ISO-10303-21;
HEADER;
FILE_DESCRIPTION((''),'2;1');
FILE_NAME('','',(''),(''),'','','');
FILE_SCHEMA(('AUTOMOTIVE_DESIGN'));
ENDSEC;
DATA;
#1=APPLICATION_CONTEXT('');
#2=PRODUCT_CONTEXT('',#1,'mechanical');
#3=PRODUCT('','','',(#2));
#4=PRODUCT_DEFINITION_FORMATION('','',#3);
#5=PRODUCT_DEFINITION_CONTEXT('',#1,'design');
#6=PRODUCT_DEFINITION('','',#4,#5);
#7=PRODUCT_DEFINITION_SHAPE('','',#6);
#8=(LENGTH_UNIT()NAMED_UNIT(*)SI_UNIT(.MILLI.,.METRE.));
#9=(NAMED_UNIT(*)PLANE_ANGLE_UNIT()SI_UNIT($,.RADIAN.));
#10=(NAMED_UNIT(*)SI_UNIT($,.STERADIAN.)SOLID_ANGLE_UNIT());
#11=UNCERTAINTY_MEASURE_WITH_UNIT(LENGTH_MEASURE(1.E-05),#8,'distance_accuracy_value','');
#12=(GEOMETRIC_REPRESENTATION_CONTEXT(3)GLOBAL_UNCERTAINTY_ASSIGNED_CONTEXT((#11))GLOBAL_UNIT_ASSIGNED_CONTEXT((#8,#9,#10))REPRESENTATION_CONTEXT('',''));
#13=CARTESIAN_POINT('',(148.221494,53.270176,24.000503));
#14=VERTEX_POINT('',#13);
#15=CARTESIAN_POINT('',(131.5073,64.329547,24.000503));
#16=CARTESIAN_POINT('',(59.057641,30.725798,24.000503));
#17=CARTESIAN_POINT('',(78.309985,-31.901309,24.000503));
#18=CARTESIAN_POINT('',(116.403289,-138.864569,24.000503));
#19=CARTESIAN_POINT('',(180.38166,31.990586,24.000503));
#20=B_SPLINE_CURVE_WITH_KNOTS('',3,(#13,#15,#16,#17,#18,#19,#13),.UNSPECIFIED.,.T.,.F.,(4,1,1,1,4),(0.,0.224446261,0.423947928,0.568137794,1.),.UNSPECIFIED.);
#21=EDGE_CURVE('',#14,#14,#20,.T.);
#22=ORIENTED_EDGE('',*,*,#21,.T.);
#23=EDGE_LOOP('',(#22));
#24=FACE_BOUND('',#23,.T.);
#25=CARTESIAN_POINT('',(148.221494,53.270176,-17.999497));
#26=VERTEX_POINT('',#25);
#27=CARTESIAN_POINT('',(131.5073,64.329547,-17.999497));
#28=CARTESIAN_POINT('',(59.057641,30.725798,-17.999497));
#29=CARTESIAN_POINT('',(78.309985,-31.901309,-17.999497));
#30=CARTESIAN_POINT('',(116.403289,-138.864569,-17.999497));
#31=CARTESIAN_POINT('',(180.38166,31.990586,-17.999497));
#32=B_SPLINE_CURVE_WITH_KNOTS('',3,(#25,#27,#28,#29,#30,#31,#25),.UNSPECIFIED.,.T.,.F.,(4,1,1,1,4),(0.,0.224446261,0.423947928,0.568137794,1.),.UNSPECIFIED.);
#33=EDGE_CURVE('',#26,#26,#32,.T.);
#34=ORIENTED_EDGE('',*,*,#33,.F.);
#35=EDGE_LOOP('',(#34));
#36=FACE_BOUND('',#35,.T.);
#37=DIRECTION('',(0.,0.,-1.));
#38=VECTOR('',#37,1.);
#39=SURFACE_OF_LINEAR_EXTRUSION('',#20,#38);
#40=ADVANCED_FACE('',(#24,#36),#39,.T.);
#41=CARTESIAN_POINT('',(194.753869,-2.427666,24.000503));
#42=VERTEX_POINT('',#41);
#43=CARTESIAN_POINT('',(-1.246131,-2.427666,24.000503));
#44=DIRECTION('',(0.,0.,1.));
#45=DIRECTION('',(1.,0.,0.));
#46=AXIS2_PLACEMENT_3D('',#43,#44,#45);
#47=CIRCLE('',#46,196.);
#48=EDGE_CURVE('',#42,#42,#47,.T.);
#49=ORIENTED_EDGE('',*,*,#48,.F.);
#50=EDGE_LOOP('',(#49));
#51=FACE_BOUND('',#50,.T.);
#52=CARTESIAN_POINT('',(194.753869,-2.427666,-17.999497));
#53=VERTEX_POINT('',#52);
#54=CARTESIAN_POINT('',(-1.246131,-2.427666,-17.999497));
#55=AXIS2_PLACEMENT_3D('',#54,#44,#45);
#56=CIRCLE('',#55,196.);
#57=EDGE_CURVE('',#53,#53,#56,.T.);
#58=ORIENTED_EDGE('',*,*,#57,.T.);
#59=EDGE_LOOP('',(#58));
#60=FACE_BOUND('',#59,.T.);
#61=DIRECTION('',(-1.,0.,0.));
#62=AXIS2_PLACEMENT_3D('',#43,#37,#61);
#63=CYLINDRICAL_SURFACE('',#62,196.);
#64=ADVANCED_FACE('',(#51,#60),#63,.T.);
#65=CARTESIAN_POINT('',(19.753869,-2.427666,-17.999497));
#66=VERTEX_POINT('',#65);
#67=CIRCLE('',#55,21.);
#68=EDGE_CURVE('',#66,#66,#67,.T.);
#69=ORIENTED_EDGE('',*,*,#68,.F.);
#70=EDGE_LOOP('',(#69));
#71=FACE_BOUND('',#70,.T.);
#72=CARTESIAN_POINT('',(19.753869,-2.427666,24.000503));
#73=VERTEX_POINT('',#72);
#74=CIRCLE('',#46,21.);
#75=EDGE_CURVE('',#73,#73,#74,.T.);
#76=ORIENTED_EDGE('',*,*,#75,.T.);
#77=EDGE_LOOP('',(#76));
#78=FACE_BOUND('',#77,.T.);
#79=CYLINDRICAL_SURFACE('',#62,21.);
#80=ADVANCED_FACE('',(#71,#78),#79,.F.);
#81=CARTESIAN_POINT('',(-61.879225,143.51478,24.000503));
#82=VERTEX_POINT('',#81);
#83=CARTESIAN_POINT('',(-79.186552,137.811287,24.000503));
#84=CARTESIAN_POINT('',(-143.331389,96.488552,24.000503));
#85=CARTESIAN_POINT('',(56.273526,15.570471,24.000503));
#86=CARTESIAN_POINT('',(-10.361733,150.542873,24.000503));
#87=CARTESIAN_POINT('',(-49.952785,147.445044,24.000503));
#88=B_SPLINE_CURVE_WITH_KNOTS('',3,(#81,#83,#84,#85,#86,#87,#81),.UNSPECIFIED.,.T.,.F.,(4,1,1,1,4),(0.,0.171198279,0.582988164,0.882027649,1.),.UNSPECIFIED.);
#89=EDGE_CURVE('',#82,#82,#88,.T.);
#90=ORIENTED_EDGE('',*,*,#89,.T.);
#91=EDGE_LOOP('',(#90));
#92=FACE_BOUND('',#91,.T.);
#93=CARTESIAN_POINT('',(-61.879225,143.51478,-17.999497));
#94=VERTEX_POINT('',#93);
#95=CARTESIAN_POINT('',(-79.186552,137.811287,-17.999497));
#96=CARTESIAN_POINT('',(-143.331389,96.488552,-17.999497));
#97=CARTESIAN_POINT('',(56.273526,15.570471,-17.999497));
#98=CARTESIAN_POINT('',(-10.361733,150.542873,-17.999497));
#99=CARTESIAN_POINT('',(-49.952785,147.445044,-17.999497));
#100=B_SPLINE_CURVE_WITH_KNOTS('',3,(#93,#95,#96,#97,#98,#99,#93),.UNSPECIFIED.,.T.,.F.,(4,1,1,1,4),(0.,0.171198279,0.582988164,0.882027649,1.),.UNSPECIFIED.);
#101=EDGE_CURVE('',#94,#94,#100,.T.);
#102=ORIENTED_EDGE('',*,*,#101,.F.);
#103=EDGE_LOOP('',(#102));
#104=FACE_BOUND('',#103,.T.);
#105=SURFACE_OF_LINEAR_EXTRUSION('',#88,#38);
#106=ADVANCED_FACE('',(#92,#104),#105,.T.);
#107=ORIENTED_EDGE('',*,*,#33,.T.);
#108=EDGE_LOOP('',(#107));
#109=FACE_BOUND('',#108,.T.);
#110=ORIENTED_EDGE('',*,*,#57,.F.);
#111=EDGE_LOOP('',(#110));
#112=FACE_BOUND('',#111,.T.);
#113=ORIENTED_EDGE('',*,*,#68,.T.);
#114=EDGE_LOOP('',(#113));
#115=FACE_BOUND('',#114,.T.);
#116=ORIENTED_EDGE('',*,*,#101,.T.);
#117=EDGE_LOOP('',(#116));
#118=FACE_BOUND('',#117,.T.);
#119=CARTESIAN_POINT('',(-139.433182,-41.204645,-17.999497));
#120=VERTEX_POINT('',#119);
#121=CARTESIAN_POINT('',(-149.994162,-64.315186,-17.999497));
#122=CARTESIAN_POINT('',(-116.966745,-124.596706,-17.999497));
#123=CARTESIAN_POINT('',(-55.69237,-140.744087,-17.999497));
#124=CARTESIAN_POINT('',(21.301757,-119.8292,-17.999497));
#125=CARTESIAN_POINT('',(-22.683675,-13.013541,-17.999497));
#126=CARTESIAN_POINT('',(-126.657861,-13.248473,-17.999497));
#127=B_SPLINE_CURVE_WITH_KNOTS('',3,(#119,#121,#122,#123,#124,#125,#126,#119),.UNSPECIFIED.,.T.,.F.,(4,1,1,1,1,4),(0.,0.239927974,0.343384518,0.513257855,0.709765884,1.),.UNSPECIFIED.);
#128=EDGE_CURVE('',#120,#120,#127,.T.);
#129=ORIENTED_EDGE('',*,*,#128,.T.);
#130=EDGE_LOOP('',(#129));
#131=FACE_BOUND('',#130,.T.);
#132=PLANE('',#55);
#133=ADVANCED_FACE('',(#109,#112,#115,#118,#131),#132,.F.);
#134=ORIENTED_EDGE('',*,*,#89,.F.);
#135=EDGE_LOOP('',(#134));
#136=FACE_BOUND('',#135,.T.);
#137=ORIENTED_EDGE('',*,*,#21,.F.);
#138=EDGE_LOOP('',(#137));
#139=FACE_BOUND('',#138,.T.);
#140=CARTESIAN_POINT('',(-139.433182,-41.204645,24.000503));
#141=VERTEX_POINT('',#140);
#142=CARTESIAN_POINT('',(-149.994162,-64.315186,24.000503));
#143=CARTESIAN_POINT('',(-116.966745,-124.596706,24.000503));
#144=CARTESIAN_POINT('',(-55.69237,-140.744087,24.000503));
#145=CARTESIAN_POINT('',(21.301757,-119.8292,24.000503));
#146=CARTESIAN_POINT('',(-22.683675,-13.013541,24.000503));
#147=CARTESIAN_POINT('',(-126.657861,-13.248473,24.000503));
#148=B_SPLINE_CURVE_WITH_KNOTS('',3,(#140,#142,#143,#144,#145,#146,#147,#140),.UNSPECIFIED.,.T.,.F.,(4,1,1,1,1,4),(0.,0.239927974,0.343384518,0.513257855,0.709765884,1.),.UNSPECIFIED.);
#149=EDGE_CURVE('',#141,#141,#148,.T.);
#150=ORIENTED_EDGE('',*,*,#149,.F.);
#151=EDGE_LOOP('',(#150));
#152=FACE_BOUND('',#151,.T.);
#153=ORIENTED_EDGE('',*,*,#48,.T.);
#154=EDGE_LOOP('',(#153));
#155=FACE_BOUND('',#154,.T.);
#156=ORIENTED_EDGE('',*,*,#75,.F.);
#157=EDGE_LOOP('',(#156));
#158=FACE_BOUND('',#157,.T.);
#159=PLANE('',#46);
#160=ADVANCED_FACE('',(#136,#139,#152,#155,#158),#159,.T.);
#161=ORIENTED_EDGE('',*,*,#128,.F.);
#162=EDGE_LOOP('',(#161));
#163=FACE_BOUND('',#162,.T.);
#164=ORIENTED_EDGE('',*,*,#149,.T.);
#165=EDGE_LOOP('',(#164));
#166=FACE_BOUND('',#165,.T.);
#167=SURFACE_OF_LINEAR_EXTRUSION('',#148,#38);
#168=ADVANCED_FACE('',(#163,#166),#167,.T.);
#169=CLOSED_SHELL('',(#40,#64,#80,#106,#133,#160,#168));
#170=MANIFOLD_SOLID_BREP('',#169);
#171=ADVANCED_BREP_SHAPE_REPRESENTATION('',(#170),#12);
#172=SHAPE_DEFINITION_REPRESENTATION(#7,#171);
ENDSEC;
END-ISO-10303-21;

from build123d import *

# Parameters (mm, degrees)
CROQUIS4_R              = 28
CROQUIS4_R_2            = 3
SALIENTE_EXTRUIR4_DEPTH = 6
ESCALA1_OUTLINE_R       = 3
ESCALA1_DEPTH           = 6
ESCALA1_START           = -17.999496841
ESCALA1_2_OUTLINE_R     = 196
ESCALA1_2_OUTLINE_R_2   = 21
ESCALA1_2_DEPTH         = 42


# Read off the part's stored shape, not the designer's step: Escala1
with BuildPart() as part:
    # Croquis4 → Saliente-Extruir4 (new body)
    with BuildSketch(Plane.XY):
        Circle(CROQUIS4_R)
        Circle(CROQUIS4_R_2, mode=Mode.SUBTRACT)
        with BuildLine():
            add(Edge.make_bspline(
                [(-8.661870504, 20.848920863), (-11.134345794, 20.034136118), (-20.297893872, 14.130888348), (8.217093964, 2.571162502), (-1.30222885, 21.85293415), (-6.958093307, 21.41038721), (-8.661870504, 20.848920863)],
                knots=[0, 0, 0, 0, 0.171198279, 0.582988164, 0.882027649, 1, 1, 1, 1], degree=3))
        make_face(mode=Mode.SUBTRACT)
        with BuildLine():
            add(Edge.make_bspline(
                [(-19.741007194, -5.539568345), (-21.249718651, -8.841074311), (-16.531516182, -17.452719956), (-7.778034095, -19.759488675), (3.221126904, -16.771647645), (-3.062506153, -1.512267892), (-17.915961418, -1.545829524), (-19.741007194, -5.539568345)],
                knots=[0, 0, 0, 0, 0.239927974, 0.343384518, 0.513257855, 0.709765884, 1, 1, 1, 1], degree=3))
        make_face(mode=Mode.SUBTRACT)
        with BuildLine():
            add(Edge.make_bspline(
                [(21.352517986, 7.956834532), (18.964775909, 9.536744657), (8.614824702, 4.736209176), (11.365159497, -4.210520436), (16.807060129, -19.490986174), (25.946827357, 4.916893174), (21.352517986, 7.956834532)],
                knots=[0, 0, 0, 0, 0.224446261, 0.423947928, 0.568137794, 1, 1, 1, 1], degree=3))
        make_face(mode=Mode.SUBTRACT)
    extrude(amount=SALIENTE_EXTRUIR4_DEPTH)

    # Escala1 outline → Escala1 (cut)
    with BuildSketch(Plane.XY):
        with BuildLine():
            add(Edge.make_bspline(
                [(17.000522152, 7.967507439), (14.840589963, 7.215803291), (9.089500341, 3.192108217), (11.365159497, -4.210520436), (14.550664807, -13.155190328), (17.331175474, -11.190725846), (18.484727449, -9.617464952)],
                knots=[0.098053943, 0.098053943, 0.098053943, 0.098053943, 0.224446261, 0.423947928, 0.568137794, 0.678429294, 0.678429294, 0.678429294, 0.678429294], degree=3))
            ThreePointArc((17.000522152, 7.967507439), (9.434064569, 15.653634005), (-0.949635508, 18.57024071))
            add(Edge.make_bspline(
                [(-13.643682988, 14.522281267), (-11.296449172, 10.565883797), (5.297482073, 4.692739999), (1.478494793, 15.764375539), (-0.949635508, 18.57024071)],
                knots=[0.227878432, 0.227878432, 0.227878432, 0.227878432, 0.582988164, 0.803352892, 0.803352892, 0.803352892, 0.803352892], degree=3))
            ThreePointArc((-13.643682988, 14.522281267), (-13.860654258, -19.216764164), (18.484727449, -9.617464952))
        make_face()
        with BuildLine():
            add(Edge.make_bspline(
                [(-19.741007194, -5.539568345), (-21.249718651, -8.841074311), (-16.531516182, -17.452719956), (-7.778034095, -19.759488675), (3.221126904, -16.771647645), (-3.062506153, -1.512267892), (-17.915961418, -1.545829524), (-19.741007194, -5.539568345)],
                knots=[0, 0, 0, 0, 0.239927974, 0.343384518, 0.513257855, 0.709765884, 1, 1, 1, 1], degree=3))
        make_face(mode=Mode.SUBTRACT)
        Circle(ESCALA1_OUTLINE_R, mode=Mode.SUBTRACT)
    extrude(amount=ESCALA1_DEPTH, mode=Mode.SUBTRACT)

    # Escala1 2 outline → Escala1 2 (add)
    with BuildSketch(Plane.XY.offset(ESCALA1_START)):
        with Locations((-1.246131437, -2.427666094)):
            Circle(ESCALA1_2_OUTLINE_R)
        with BuildLine():
            add(Edge.make_bspline(
                [(-139.433181797, -41.204644512), (-149.994161996, -64.315186271), (-116.966744714, -124.596705788), (-55.692370104, -140.74408682), (21.301756893, -119.829199607), (-22.683674511, -13.013541342), (-126.657861367, -13.248472762), (-139.433181797, -41.204644512)],
                knots=[0, 0, 0, 0, 0.239927974, 0.343384518, 0.513257855, 0.709765884, 1, 1, 1, 1], degree=3))
        make_face(mode=Mode.SUBTRACT)
        with BuildLine():
            add(Edge.make_bspline(
                [(148.221494462, 53.270175632), (131.507299926, 64.329546503), (59.057641477, 30.725798138), (78.309985044, -31.901309148), (116.403289469, -138.864569314), (180.381660063, 31.990586127), (148.221494462, 53.270175632)],
                knots=[0, 0, 0, 0, 0.224446261, 0.423947928, 0.568137794, 1, 1, 1, 1], degree=3))
        make_face(mode=Mode.SUBTRACT)
        with BuildLine():
            add(Edge.make_bspline(
                [(-61.879224962, 143.514779949), (-79.186551993, 137.811286735), (-143.331388538, 96.488552344), (56.273526308, 15.570471419), (-10.361733388, 150.542872956), (-49.95278459, 147.445044375), (-61.879224962, 143.514779949)],
                knots=[0, 0, 0, 0, 0.171198279, 0.582988164, 0.882027649, 1, 1, 1, 1], degree=3))
        make_face(mode=Mode.SUBTRACT)
        with Locations((-1.246131437, -2.427666094)):
            Circle(ESCALA1_2_OUTLINE_R_2, mode=Mode.SUBTRACT)
    extrude(amount=ESCALA1_2_DEPTH)


solid = part.part
